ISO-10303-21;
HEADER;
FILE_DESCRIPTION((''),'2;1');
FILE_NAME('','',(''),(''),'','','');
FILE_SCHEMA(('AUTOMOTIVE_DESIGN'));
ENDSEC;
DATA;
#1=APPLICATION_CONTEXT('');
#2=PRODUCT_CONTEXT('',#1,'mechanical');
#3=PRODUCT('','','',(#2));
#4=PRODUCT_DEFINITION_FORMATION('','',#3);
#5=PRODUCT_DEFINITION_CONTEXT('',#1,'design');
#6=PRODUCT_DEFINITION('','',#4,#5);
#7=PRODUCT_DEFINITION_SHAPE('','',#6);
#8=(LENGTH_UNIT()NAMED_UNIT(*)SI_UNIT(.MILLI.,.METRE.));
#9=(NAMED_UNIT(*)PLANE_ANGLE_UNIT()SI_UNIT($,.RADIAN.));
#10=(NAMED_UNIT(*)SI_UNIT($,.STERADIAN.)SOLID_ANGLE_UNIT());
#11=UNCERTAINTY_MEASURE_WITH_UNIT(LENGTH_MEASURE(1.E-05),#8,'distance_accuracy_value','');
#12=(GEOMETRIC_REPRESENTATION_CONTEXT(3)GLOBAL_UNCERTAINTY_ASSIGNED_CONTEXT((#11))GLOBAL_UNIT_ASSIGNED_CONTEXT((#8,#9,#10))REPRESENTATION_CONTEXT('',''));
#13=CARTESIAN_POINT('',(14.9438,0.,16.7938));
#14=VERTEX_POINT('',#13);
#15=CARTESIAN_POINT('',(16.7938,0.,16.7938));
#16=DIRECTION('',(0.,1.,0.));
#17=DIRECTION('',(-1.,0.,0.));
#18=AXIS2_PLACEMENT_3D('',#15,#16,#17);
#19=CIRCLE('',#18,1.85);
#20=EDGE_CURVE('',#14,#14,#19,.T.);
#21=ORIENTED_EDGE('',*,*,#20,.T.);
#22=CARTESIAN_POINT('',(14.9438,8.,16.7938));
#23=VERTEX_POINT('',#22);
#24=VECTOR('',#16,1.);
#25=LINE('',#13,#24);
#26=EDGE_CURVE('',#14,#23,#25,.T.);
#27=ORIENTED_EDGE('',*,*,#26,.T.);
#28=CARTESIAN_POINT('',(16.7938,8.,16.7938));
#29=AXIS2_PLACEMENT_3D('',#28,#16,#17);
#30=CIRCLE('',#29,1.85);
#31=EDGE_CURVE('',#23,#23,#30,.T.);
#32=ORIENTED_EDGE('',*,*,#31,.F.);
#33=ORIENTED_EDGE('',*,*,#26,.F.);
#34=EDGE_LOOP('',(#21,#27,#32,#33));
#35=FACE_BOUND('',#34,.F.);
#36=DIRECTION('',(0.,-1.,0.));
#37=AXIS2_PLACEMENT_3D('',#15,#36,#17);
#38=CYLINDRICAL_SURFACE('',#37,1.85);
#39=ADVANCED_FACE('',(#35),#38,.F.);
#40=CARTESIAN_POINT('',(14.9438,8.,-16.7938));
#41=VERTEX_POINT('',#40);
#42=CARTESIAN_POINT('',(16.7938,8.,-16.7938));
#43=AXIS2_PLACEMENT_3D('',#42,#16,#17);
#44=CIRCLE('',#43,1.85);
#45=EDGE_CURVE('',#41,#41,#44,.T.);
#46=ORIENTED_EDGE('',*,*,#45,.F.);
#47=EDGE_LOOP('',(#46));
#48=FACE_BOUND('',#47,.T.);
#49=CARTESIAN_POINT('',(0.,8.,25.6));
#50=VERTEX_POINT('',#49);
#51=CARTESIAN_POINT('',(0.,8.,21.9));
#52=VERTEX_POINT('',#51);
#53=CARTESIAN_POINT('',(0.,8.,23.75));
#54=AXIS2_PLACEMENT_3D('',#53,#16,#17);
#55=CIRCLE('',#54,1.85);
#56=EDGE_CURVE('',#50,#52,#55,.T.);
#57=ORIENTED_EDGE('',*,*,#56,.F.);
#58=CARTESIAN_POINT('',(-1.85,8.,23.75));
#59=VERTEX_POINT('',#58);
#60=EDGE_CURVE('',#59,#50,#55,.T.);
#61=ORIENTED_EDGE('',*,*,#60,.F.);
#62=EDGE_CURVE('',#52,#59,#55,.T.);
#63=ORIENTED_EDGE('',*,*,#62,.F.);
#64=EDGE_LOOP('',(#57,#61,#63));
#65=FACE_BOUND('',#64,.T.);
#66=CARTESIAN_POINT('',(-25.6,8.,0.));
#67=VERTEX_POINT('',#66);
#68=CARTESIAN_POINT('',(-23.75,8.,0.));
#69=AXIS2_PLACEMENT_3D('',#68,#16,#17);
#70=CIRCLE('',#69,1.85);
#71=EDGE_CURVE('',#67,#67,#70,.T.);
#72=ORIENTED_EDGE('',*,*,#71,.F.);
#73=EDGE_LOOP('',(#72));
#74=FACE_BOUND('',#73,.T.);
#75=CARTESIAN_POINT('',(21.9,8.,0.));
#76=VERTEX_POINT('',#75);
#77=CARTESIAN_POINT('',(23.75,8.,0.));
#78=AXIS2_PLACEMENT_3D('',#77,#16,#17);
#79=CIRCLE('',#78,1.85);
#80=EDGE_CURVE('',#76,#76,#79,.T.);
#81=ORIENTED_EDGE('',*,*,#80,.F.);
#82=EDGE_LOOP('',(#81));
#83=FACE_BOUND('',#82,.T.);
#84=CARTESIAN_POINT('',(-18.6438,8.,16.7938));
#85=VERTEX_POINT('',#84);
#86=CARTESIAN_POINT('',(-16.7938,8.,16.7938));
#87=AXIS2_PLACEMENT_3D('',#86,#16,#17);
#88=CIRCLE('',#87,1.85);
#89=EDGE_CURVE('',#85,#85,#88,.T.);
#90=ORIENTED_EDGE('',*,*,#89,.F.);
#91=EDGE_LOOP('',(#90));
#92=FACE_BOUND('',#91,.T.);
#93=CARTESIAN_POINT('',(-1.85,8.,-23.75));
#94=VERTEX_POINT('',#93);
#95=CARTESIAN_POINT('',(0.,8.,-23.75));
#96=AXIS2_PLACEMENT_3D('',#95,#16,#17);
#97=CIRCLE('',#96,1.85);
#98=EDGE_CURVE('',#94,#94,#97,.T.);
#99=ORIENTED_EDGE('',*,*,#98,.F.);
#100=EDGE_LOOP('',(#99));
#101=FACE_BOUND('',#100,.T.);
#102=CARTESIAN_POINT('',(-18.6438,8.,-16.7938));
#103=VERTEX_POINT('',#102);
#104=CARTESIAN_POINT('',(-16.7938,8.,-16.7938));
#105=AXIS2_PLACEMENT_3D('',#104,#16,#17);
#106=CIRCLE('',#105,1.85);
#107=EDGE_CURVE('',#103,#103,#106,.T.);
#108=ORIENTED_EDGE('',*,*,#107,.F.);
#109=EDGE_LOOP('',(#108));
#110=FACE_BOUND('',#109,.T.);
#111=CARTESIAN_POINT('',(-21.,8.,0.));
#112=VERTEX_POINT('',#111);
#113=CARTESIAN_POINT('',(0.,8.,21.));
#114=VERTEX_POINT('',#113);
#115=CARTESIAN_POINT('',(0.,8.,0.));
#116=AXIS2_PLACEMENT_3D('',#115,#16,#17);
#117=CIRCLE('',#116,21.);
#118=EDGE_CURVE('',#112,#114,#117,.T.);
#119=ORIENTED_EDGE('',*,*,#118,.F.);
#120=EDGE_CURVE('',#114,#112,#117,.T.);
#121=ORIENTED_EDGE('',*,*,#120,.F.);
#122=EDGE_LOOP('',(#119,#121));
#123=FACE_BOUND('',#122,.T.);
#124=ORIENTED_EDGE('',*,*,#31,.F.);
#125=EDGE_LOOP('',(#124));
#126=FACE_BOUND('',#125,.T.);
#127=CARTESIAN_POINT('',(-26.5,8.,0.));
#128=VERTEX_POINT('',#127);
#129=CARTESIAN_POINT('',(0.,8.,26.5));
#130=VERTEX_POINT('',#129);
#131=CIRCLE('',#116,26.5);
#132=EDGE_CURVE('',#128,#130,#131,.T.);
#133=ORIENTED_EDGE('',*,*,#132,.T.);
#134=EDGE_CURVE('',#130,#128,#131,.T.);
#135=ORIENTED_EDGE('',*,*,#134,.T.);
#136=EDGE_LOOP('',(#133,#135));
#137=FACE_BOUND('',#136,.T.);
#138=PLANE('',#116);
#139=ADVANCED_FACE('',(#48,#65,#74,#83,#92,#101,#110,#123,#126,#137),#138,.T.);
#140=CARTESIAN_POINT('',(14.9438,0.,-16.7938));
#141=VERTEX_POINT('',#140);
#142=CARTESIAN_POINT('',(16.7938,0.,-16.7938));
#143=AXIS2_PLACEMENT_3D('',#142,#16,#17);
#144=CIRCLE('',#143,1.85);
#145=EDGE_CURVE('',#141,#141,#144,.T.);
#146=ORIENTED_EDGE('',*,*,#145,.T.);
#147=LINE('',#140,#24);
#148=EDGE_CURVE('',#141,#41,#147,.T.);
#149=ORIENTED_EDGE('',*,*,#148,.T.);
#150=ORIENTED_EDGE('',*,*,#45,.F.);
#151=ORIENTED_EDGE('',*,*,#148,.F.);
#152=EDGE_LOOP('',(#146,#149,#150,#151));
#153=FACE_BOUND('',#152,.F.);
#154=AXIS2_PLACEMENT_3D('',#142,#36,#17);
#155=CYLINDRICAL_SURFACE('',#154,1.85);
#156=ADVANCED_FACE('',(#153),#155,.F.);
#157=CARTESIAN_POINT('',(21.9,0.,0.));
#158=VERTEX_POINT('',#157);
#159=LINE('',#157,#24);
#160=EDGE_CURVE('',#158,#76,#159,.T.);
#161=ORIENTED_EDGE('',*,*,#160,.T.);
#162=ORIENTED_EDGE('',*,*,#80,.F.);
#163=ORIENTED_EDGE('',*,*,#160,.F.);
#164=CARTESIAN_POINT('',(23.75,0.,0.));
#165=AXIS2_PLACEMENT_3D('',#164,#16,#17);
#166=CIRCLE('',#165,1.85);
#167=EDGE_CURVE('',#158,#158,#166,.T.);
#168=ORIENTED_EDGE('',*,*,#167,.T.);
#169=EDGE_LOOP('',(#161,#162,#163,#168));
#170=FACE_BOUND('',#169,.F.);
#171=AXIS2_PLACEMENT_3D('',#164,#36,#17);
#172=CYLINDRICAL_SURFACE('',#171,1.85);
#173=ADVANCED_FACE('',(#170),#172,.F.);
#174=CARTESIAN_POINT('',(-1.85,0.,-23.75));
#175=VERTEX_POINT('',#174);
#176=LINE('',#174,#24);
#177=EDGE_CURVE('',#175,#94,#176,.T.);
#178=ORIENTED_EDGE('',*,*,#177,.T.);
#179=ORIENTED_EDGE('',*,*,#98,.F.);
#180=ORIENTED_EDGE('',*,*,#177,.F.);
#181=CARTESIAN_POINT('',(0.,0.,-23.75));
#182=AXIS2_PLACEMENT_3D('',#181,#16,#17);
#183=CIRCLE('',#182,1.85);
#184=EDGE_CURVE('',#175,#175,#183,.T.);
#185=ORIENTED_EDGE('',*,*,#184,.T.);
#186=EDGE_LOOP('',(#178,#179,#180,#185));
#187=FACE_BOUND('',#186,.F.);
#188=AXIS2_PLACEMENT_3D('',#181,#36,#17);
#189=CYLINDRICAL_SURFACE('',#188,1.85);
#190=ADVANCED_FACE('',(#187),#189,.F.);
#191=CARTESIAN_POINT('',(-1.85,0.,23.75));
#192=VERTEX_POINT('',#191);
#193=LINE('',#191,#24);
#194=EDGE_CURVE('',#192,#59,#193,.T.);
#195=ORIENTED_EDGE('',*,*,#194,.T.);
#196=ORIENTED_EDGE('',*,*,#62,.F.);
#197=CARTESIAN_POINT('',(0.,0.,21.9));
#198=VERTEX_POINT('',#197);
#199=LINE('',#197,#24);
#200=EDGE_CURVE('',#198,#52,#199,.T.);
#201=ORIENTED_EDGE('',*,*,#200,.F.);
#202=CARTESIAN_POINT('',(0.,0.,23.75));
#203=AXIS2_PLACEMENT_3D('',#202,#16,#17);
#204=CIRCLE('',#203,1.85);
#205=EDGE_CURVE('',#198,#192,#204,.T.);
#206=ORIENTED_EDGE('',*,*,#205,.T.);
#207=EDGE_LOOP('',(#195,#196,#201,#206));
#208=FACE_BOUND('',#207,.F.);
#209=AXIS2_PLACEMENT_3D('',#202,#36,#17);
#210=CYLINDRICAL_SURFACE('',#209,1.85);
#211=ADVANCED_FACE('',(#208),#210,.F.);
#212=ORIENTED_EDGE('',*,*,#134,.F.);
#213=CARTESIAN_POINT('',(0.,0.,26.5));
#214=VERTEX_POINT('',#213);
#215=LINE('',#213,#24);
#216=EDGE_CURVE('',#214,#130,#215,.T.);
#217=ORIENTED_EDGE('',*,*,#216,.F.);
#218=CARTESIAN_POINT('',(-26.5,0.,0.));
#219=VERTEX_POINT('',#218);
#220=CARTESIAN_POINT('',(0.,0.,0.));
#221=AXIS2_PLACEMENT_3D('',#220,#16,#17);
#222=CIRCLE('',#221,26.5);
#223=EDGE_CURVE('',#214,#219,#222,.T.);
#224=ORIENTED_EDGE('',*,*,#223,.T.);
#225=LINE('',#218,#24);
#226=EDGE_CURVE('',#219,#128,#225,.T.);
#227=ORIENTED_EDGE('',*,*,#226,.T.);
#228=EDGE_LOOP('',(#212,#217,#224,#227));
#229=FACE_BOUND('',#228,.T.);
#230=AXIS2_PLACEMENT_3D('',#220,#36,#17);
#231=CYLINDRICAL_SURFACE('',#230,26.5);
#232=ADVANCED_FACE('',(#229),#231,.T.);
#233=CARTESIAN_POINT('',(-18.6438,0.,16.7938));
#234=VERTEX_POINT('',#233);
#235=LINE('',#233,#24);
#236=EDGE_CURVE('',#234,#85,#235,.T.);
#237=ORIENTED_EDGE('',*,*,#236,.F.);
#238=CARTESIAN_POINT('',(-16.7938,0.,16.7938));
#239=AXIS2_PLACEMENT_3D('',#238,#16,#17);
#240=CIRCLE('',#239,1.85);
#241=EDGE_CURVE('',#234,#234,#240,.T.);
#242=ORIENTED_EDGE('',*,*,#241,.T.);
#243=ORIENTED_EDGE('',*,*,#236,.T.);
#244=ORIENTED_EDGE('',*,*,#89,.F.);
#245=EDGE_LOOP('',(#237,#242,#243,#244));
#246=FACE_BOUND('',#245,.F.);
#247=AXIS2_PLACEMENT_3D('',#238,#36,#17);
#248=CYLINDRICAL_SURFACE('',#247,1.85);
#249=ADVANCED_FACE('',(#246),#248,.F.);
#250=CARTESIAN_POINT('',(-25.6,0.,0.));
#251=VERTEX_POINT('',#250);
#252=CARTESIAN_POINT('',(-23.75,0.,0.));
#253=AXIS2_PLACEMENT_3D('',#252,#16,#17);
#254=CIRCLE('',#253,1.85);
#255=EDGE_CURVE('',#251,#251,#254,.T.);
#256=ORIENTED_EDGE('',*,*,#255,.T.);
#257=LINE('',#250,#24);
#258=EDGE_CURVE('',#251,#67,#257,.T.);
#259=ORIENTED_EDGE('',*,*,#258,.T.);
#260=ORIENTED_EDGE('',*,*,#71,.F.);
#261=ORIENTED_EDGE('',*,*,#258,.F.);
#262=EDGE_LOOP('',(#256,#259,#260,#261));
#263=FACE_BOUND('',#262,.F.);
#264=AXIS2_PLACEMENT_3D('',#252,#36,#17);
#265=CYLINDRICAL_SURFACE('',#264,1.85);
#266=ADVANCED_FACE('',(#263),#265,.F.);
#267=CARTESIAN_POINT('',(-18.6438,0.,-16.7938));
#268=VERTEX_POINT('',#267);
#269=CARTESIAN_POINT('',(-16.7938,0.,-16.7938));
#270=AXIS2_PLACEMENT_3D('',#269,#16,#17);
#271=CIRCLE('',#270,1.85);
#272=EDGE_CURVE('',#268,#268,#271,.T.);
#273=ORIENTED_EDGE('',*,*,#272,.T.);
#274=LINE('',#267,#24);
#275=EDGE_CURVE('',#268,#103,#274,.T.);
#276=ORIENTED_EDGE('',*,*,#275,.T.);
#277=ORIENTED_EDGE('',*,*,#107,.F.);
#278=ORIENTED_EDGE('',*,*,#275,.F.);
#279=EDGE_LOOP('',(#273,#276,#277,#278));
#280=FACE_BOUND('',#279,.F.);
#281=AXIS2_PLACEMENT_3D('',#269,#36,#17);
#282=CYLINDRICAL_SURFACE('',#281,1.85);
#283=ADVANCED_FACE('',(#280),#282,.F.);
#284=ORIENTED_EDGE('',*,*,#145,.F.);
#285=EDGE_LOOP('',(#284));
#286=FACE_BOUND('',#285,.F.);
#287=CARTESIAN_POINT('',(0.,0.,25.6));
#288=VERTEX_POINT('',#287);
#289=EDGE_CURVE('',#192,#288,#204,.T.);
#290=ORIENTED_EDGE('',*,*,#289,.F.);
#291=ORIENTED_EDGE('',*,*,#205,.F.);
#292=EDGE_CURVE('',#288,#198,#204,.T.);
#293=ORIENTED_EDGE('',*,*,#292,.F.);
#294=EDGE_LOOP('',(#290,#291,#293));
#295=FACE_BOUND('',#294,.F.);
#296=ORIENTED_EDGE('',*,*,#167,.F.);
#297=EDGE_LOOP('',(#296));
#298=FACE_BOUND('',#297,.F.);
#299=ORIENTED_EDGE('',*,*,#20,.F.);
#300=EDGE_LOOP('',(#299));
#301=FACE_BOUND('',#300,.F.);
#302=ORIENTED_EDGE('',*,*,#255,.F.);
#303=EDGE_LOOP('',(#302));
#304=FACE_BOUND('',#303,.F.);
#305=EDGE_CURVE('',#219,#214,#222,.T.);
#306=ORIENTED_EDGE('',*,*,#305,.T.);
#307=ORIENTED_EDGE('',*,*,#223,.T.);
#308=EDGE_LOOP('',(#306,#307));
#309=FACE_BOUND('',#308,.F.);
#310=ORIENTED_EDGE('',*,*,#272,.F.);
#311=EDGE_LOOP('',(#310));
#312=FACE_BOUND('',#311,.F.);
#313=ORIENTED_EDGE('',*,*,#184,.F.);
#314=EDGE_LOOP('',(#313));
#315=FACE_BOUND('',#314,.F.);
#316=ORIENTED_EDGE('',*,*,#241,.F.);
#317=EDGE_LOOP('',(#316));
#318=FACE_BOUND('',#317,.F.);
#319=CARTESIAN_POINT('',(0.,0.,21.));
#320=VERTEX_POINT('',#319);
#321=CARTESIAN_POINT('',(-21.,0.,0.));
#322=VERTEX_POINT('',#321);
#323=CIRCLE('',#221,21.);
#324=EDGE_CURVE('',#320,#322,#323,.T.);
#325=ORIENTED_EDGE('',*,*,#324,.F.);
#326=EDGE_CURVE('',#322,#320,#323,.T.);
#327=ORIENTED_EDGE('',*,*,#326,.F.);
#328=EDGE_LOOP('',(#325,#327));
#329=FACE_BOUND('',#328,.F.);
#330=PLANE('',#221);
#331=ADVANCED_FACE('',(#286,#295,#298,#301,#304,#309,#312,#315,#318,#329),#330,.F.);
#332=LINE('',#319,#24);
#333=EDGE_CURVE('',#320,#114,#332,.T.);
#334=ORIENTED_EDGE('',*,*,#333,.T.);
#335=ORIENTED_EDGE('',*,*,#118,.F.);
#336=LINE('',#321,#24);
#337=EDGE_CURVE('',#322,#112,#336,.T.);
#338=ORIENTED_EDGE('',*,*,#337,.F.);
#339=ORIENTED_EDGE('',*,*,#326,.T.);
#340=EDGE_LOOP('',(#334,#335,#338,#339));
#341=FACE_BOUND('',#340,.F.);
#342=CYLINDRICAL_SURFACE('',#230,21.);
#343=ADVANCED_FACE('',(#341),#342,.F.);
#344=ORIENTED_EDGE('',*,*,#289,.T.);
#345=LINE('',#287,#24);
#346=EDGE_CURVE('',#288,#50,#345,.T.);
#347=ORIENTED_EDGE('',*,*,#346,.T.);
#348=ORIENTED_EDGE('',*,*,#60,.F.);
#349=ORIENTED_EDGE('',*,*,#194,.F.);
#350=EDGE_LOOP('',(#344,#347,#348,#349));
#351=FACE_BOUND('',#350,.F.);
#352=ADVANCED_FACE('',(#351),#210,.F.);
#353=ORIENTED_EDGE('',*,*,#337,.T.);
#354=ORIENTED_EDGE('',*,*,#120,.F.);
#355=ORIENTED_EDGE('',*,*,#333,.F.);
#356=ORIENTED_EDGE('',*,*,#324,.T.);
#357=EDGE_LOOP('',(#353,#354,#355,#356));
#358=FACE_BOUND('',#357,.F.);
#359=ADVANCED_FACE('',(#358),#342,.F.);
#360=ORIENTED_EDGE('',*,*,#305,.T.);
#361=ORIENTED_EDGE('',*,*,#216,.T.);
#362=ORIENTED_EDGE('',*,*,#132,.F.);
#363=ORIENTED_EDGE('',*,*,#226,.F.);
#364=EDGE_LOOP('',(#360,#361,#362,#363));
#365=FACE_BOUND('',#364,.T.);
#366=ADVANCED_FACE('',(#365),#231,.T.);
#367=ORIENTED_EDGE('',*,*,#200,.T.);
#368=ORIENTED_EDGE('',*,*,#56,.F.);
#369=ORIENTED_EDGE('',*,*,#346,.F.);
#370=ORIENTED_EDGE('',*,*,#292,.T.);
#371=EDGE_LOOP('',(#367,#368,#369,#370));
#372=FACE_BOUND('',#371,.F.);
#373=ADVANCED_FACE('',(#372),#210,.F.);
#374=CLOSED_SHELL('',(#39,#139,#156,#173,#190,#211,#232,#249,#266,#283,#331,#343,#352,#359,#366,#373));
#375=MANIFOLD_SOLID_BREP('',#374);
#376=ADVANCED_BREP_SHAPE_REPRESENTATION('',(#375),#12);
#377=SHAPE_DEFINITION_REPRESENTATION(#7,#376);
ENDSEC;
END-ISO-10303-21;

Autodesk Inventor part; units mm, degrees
ref_plane "YZ Plane" through (0, 0, 0) normal (1, 0, 0) x (0, 1, 0)
ref_plane "XZ Plane" through (0, 0, 0) normal (0, 1, 0) x (-1, 0, 0)
ref_plane "XY Plane" through (0, 0, 0) normal (0, 0, 1) x (1, 0, 0)
sketch "Szkic1" plane through (0, 0, 0) normal (0, 1, 0) x (-1, 0, 0)
  circle A0 centre (0, 0) radius 21
  circle A1 centre (0, 0) radius 26.5
  circle A2 centre (16.7938, 16.7938) radius 1.85
  circle A3 centre (0, 23.75) radius 1.85
  circle A4 centre (-16.7938, 16.7938) radius 1.85
  circle A5 centre (-23.75, 0) radius 1.85
  circle A6 centre (-16.7938, -16.7938) radius 1.85
  circle A7 centre (0, -23.75) radius 1.85
  circle A8 centre (16.7938, -16.7938) radius 1.85
  circle A9 centre (23.75, 0) radius 1.85
  line L0 (0, 21) -> (0, 26.5)
  dimension "d0" = 42
  dimension "d8" = 53
  dimension "d1" = 3.7
  dimension "d4" = 360
extrude "Wyciągnięcie proste1" add sketch "Szkic1" along normal blind 8
properties part number "Bell_KoloFormaGora"
